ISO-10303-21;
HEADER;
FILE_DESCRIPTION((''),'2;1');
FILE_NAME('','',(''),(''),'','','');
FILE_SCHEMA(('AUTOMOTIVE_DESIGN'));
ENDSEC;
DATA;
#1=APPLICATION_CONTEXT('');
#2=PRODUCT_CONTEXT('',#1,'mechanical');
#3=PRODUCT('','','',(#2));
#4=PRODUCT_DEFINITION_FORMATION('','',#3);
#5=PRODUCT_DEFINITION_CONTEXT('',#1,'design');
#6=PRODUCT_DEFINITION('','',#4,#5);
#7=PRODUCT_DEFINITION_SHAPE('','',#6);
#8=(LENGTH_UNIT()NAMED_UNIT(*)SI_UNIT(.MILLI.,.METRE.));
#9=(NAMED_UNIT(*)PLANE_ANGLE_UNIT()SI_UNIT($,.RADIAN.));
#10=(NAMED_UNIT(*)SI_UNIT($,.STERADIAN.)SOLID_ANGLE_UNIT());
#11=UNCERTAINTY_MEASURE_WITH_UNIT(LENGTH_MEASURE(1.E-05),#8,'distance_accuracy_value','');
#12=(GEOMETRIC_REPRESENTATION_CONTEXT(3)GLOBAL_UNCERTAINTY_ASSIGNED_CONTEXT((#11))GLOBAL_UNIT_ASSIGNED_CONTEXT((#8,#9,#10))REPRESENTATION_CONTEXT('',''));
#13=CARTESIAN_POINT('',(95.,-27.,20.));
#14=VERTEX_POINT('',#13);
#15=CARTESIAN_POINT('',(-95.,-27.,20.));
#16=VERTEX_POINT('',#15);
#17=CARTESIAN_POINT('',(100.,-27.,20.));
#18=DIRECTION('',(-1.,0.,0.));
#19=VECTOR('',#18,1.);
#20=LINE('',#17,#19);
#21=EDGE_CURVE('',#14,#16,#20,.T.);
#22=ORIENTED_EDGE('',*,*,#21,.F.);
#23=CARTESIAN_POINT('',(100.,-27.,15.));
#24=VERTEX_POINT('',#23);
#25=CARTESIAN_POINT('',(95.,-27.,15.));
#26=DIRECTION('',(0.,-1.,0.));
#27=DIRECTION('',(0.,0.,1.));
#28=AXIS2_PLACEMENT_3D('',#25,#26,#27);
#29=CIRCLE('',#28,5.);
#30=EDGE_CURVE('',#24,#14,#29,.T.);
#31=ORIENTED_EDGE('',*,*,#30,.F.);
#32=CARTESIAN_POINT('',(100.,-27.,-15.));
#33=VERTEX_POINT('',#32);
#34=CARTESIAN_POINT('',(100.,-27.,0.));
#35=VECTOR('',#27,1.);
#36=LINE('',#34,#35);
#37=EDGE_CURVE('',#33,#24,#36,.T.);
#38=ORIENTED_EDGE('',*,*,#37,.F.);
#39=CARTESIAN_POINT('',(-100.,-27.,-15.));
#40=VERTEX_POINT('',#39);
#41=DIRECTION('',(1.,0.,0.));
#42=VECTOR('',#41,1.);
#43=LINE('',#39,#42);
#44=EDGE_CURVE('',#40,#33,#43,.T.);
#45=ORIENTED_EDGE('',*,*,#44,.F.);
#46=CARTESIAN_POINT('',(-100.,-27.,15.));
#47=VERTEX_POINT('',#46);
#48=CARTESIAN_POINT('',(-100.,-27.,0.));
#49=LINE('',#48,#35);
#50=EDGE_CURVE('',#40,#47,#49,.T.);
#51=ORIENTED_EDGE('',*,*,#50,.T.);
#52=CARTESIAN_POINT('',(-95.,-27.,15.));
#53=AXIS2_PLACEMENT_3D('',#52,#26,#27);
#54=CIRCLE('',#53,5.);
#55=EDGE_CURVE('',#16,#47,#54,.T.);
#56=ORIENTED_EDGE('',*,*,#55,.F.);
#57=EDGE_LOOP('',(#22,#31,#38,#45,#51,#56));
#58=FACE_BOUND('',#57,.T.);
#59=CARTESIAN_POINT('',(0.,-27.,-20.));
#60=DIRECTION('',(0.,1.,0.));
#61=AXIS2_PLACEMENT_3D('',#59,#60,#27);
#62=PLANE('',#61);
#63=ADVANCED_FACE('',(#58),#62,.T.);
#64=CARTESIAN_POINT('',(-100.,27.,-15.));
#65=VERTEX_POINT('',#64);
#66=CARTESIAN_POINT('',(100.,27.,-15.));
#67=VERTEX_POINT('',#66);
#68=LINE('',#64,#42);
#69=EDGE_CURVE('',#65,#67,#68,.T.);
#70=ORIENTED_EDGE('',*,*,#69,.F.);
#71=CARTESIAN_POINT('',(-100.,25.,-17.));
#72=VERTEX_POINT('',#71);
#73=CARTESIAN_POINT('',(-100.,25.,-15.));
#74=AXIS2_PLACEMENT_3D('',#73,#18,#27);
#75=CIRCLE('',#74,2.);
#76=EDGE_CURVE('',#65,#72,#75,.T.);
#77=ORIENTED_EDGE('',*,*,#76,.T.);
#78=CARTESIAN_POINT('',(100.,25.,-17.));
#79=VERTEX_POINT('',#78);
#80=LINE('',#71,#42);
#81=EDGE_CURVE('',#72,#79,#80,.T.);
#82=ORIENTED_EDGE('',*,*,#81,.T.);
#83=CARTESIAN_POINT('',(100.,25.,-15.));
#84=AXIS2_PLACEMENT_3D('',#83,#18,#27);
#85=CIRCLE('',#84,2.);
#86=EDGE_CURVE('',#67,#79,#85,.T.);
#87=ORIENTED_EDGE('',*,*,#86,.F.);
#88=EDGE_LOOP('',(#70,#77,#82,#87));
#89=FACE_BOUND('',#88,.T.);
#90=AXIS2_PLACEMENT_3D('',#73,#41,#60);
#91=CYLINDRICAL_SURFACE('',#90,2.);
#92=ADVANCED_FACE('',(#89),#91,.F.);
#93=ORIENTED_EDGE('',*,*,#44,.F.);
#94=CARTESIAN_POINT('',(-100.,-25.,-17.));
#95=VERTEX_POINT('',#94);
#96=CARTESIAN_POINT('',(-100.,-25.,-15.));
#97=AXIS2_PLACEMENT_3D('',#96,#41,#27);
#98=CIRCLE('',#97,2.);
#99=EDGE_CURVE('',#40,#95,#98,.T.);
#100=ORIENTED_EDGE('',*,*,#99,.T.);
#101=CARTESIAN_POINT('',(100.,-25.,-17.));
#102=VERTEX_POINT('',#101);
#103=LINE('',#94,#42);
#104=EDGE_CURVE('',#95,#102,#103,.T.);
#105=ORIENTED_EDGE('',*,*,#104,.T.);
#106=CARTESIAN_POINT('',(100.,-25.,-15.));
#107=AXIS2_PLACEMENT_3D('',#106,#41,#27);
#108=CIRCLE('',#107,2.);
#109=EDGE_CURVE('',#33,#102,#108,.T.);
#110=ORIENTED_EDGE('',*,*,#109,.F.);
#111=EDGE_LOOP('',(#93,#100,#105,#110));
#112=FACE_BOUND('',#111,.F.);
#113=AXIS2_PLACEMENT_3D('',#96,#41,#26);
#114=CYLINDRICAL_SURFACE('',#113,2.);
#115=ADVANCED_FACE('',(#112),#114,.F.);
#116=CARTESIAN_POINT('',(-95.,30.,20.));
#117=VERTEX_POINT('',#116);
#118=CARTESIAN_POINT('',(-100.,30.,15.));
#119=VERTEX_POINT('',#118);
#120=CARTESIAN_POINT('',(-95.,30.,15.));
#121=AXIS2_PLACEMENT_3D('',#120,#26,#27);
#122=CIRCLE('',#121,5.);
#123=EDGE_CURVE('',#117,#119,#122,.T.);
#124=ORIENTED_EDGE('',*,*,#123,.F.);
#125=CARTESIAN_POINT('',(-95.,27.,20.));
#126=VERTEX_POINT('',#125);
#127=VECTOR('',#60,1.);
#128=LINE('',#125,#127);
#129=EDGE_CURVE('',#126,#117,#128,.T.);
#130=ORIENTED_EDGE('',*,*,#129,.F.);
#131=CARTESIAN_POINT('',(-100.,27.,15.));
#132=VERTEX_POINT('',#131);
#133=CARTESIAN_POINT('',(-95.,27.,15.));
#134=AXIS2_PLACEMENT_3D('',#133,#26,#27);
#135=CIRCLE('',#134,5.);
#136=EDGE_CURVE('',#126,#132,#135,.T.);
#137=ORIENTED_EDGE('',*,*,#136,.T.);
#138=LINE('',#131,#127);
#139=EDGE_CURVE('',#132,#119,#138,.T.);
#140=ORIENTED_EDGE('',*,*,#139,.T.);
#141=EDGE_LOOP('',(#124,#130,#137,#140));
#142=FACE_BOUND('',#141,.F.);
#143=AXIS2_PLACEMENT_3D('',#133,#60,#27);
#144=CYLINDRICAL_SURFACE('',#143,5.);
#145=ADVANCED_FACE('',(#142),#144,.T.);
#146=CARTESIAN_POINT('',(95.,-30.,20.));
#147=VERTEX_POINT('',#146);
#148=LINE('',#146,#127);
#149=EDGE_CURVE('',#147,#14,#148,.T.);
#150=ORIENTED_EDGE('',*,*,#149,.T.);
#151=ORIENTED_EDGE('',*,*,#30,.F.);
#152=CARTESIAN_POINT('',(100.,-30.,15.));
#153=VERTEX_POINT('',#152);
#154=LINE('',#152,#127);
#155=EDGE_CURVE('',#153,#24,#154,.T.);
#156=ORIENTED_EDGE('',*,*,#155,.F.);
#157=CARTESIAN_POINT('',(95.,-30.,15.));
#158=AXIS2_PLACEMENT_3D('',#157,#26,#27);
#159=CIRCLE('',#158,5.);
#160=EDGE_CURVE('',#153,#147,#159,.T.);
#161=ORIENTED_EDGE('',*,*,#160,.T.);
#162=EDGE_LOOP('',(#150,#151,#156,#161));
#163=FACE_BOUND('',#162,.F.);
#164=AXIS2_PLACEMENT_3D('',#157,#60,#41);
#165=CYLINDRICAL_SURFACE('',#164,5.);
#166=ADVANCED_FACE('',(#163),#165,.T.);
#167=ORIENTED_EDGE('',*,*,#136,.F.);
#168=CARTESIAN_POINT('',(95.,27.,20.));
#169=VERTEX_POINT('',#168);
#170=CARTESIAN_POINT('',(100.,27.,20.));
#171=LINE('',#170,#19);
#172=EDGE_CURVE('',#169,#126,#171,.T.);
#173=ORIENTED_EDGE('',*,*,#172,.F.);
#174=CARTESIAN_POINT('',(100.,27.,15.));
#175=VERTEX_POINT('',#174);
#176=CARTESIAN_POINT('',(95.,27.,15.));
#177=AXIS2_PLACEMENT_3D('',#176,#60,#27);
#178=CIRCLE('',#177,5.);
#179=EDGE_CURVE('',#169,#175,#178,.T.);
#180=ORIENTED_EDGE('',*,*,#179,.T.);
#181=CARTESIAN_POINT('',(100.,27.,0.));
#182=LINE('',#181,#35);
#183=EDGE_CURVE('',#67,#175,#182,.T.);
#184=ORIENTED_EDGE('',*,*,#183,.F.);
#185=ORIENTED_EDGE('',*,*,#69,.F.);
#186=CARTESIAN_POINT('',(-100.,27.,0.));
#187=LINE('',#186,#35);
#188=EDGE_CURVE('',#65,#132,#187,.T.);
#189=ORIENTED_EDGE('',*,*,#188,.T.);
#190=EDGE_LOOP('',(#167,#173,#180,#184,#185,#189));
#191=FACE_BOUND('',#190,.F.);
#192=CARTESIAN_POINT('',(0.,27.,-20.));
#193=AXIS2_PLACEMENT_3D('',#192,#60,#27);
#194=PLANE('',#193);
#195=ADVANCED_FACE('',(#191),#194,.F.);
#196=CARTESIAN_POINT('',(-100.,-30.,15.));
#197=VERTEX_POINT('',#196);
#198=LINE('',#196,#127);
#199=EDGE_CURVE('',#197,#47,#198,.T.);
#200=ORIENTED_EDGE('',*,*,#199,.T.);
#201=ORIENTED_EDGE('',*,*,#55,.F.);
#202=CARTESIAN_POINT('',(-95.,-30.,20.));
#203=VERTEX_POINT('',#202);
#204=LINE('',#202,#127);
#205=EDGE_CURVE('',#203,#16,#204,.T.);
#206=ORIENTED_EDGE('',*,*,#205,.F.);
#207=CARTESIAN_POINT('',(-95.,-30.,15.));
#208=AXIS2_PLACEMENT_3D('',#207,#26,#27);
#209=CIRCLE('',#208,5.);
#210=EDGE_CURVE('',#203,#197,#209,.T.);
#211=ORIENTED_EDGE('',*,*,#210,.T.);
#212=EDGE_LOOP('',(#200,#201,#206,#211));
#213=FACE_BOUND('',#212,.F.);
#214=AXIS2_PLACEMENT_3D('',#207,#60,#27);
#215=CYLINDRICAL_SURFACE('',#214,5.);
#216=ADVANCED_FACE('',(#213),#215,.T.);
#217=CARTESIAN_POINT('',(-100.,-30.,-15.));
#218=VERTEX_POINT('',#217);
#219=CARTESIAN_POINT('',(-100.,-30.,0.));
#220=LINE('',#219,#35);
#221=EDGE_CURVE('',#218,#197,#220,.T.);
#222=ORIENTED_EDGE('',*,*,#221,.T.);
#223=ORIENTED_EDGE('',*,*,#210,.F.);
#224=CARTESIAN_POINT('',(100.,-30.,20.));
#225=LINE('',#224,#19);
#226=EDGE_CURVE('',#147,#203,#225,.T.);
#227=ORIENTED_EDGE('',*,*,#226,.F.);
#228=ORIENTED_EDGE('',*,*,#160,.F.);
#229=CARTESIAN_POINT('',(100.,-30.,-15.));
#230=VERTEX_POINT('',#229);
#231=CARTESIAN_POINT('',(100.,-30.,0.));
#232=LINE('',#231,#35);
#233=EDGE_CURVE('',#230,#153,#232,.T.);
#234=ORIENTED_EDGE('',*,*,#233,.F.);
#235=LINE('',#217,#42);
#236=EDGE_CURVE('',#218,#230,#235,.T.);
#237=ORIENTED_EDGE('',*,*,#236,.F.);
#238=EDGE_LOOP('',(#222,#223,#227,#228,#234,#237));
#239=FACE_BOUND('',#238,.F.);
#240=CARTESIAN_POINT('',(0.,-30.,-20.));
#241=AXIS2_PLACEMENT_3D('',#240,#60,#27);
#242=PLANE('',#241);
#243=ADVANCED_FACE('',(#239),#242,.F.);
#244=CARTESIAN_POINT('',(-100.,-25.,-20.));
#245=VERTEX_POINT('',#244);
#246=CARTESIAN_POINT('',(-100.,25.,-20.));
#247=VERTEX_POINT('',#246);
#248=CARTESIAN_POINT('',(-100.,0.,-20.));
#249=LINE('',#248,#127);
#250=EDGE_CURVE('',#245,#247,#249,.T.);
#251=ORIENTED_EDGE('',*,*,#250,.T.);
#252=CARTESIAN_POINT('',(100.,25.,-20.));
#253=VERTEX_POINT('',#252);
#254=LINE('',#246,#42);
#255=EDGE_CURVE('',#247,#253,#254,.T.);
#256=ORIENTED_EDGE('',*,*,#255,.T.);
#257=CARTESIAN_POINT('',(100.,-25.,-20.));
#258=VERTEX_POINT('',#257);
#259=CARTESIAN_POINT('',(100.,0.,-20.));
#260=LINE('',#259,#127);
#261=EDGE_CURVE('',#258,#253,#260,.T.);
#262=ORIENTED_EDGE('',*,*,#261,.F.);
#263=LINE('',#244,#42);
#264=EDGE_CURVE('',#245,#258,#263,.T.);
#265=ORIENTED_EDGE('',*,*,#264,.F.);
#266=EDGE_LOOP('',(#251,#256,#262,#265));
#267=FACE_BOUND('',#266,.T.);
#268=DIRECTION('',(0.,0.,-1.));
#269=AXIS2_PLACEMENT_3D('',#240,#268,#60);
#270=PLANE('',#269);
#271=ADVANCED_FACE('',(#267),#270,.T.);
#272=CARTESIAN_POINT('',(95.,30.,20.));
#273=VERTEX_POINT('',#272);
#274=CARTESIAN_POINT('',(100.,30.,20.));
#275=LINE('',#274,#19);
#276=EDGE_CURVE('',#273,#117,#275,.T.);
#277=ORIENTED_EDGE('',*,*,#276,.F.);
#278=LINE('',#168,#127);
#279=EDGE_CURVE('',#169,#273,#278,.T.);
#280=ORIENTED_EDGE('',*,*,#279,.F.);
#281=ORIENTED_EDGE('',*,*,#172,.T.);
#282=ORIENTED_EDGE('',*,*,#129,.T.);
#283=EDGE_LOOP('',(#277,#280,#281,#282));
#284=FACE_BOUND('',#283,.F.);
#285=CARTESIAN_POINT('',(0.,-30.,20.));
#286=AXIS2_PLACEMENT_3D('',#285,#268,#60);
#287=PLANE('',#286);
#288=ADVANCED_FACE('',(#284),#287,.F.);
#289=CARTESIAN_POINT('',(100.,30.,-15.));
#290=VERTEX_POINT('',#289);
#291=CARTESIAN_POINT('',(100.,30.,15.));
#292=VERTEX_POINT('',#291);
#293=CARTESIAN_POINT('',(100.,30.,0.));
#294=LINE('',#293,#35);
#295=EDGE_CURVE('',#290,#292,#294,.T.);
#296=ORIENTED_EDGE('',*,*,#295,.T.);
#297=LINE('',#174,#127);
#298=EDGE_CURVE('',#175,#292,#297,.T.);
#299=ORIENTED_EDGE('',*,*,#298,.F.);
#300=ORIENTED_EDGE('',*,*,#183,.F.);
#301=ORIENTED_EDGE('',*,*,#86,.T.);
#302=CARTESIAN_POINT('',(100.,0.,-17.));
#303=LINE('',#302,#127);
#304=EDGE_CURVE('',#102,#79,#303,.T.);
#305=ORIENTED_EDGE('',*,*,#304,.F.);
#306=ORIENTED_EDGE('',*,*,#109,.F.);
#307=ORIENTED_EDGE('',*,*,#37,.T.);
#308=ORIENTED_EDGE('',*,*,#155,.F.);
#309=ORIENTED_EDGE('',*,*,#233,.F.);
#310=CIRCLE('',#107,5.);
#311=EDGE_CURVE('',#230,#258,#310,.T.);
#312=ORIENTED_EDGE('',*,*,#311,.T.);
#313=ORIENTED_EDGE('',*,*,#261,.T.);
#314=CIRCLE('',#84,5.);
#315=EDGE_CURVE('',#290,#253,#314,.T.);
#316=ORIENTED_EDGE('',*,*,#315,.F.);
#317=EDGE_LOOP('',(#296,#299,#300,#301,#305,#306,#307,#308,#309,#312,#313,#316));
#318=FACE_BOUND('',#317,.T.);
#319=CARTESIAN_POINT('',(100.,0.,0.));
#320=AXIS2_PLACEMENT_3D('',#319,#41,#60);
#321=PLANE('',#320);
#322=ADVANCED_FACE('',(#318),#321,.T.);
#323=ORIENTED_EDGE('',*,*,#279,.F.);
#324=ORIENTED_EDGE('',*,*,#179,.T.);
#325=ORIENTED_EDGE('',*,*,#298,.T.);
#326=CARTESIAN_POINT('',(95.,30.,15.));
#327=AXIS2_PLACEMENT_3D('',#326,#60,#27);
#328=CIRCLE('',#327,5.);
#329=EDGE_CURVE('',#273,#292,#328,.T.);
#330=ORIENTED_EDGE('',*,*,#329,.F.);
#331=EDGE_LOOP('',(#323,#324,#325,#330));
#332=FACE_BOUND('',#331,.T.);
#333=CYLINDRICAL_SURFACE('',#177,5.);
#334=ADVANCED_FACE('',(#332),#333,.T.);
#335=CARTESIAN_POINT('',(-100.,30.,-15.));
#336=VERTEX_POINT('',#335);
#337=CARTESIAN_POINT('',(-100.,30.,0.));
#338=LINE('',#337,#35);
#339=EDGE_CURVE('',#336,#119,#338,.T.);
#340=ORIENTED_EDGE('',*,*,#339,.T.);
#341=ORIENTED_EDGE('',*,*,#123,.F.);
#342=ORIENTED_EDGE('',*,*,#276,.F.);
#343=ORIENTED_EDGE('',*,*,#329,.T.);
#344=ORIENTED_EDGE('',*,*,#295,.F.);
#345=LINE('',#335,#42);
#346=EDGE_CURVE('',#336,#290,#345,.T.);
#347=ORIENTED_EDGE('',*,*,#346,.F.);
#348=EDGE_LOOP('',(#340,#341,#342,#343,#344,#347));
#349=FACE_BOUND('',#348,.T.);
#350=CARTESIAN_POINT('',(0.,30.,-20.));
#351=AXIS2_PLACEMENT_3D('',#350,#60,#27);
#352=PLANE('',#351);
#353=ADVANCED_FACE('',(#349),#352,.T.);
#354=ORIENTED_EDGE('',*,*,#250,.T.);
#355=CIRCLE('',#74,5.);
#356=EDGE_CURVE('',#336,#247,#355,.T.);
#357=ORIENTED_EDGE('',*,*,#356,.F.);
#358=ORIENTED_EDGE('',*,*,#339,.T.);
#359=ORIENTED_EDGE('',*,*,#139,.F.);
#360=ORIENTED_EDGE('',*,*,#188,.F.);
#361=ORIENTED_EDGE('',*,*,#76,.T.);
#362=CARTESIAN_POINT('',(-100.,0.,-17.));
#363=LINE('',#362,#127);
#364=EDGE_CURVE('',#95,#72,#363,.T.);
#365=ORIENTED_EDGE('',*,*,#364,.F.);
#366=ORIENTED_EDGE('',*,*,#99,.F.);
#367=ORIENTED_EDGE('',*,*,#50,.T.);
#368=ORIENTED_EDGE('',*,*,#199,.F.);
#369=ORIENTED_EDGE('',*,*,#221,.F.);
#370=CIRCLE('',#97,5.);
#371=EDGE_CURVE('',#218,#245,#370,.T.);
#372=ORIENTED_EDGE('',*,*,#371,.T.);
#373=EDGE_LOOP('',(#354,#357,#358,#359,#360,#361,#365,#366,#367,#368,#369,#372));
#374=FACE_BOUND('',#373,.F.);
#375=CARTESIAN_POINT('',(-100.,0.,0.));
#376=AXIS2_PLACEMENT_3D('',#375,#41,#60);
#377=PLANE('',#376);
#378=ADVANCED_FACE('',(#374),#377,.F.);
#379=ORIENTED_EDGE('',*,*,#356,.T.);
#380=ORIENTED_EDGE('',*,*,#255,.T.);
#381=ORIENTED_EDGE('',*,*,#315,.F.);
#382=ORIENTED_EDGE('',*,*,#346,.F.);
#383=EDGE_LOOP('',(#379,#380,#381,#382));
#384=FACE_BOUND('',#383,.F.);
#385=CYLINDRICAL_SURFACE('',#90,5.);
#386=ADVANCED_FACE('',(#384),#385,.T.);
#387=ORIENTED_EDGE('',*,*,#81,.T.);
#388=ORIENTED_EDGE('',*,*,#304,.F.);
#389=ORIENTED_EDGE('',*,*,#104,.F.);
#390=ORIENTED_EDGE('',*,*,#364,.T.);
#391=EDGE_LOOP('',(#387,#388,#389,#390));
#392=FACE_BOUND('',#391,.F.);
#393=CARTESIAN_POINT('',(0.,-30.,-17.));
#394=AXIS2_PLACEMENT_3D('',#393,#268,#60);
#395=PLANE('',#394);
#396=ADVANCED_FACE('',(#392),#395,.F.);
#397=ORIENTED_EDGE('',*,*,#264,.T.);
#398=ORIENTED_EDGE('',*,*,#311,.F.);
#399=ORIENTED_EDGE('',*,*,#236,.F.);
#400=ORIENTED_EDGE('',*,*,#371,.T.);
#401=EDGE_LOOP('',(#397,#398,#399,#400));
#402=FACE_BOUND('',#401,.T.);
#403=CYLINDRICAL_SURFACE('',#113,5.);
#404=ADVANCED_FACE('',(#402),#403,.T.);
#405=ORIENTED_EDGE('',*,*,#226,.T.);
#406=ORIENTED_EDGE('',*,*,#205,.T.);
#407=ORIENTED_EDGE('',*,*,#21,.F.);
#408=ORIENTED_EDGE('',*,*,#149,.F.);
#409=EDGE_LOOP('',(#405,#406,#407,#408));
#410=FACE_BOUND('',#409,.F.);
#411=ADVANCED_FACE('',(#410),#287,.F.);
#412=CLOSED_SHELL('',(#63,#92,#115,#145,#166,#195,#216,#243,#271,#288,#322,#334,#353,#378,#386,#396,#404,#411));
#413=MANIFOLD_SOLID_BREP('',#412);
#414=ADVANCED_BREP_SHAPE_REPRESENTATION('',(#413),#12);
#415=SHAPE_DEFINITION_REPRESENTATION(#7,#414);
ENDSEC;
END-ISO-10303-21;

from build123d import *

# Parameters (mm, degrees)
F0_W     = 60
F0_H     = 40
F1_DEPTH = 100
F2_R     = 5
F3_T     = -3
F4_R     = 5


with BuildPart() as f1:
    # F0 (on Right) → F1 (new body, symmetric)
    with BuildSketch(Plane.YZ):
        Rectangle(F0_W, F0_H)
    extrude(amount=F1_DEPTH, both=True)

    # F2
    f2_edges = [f1.edges().sort_by_distance(p)[0] for p in [
        (0, -30, -20),
        (0, 30, -20),
    ]]
    fillet(f2_edges, radius=F2_R)

    # F3
    f3_openings = [f1.faces().sort_by_distance(p)[0] for p in [
        (0, 0, 20),
        (100, 0, 0.084803),
        (-100, 0, 0.084803),
    ]]
    offset(amount=F3_T, openings=f3_openings)

    # F4
    f4_edges = [f1.edges().sort_by_distance(p)[0] for p in [
        (-100, 28.5, 20),
        (-100, -28.5, 20),
        (100, 28.5, 20),
        (100, -28.5, 20),
    ]]
    fillet(f4_edges, radius=F4_R)


solid = f1.part
